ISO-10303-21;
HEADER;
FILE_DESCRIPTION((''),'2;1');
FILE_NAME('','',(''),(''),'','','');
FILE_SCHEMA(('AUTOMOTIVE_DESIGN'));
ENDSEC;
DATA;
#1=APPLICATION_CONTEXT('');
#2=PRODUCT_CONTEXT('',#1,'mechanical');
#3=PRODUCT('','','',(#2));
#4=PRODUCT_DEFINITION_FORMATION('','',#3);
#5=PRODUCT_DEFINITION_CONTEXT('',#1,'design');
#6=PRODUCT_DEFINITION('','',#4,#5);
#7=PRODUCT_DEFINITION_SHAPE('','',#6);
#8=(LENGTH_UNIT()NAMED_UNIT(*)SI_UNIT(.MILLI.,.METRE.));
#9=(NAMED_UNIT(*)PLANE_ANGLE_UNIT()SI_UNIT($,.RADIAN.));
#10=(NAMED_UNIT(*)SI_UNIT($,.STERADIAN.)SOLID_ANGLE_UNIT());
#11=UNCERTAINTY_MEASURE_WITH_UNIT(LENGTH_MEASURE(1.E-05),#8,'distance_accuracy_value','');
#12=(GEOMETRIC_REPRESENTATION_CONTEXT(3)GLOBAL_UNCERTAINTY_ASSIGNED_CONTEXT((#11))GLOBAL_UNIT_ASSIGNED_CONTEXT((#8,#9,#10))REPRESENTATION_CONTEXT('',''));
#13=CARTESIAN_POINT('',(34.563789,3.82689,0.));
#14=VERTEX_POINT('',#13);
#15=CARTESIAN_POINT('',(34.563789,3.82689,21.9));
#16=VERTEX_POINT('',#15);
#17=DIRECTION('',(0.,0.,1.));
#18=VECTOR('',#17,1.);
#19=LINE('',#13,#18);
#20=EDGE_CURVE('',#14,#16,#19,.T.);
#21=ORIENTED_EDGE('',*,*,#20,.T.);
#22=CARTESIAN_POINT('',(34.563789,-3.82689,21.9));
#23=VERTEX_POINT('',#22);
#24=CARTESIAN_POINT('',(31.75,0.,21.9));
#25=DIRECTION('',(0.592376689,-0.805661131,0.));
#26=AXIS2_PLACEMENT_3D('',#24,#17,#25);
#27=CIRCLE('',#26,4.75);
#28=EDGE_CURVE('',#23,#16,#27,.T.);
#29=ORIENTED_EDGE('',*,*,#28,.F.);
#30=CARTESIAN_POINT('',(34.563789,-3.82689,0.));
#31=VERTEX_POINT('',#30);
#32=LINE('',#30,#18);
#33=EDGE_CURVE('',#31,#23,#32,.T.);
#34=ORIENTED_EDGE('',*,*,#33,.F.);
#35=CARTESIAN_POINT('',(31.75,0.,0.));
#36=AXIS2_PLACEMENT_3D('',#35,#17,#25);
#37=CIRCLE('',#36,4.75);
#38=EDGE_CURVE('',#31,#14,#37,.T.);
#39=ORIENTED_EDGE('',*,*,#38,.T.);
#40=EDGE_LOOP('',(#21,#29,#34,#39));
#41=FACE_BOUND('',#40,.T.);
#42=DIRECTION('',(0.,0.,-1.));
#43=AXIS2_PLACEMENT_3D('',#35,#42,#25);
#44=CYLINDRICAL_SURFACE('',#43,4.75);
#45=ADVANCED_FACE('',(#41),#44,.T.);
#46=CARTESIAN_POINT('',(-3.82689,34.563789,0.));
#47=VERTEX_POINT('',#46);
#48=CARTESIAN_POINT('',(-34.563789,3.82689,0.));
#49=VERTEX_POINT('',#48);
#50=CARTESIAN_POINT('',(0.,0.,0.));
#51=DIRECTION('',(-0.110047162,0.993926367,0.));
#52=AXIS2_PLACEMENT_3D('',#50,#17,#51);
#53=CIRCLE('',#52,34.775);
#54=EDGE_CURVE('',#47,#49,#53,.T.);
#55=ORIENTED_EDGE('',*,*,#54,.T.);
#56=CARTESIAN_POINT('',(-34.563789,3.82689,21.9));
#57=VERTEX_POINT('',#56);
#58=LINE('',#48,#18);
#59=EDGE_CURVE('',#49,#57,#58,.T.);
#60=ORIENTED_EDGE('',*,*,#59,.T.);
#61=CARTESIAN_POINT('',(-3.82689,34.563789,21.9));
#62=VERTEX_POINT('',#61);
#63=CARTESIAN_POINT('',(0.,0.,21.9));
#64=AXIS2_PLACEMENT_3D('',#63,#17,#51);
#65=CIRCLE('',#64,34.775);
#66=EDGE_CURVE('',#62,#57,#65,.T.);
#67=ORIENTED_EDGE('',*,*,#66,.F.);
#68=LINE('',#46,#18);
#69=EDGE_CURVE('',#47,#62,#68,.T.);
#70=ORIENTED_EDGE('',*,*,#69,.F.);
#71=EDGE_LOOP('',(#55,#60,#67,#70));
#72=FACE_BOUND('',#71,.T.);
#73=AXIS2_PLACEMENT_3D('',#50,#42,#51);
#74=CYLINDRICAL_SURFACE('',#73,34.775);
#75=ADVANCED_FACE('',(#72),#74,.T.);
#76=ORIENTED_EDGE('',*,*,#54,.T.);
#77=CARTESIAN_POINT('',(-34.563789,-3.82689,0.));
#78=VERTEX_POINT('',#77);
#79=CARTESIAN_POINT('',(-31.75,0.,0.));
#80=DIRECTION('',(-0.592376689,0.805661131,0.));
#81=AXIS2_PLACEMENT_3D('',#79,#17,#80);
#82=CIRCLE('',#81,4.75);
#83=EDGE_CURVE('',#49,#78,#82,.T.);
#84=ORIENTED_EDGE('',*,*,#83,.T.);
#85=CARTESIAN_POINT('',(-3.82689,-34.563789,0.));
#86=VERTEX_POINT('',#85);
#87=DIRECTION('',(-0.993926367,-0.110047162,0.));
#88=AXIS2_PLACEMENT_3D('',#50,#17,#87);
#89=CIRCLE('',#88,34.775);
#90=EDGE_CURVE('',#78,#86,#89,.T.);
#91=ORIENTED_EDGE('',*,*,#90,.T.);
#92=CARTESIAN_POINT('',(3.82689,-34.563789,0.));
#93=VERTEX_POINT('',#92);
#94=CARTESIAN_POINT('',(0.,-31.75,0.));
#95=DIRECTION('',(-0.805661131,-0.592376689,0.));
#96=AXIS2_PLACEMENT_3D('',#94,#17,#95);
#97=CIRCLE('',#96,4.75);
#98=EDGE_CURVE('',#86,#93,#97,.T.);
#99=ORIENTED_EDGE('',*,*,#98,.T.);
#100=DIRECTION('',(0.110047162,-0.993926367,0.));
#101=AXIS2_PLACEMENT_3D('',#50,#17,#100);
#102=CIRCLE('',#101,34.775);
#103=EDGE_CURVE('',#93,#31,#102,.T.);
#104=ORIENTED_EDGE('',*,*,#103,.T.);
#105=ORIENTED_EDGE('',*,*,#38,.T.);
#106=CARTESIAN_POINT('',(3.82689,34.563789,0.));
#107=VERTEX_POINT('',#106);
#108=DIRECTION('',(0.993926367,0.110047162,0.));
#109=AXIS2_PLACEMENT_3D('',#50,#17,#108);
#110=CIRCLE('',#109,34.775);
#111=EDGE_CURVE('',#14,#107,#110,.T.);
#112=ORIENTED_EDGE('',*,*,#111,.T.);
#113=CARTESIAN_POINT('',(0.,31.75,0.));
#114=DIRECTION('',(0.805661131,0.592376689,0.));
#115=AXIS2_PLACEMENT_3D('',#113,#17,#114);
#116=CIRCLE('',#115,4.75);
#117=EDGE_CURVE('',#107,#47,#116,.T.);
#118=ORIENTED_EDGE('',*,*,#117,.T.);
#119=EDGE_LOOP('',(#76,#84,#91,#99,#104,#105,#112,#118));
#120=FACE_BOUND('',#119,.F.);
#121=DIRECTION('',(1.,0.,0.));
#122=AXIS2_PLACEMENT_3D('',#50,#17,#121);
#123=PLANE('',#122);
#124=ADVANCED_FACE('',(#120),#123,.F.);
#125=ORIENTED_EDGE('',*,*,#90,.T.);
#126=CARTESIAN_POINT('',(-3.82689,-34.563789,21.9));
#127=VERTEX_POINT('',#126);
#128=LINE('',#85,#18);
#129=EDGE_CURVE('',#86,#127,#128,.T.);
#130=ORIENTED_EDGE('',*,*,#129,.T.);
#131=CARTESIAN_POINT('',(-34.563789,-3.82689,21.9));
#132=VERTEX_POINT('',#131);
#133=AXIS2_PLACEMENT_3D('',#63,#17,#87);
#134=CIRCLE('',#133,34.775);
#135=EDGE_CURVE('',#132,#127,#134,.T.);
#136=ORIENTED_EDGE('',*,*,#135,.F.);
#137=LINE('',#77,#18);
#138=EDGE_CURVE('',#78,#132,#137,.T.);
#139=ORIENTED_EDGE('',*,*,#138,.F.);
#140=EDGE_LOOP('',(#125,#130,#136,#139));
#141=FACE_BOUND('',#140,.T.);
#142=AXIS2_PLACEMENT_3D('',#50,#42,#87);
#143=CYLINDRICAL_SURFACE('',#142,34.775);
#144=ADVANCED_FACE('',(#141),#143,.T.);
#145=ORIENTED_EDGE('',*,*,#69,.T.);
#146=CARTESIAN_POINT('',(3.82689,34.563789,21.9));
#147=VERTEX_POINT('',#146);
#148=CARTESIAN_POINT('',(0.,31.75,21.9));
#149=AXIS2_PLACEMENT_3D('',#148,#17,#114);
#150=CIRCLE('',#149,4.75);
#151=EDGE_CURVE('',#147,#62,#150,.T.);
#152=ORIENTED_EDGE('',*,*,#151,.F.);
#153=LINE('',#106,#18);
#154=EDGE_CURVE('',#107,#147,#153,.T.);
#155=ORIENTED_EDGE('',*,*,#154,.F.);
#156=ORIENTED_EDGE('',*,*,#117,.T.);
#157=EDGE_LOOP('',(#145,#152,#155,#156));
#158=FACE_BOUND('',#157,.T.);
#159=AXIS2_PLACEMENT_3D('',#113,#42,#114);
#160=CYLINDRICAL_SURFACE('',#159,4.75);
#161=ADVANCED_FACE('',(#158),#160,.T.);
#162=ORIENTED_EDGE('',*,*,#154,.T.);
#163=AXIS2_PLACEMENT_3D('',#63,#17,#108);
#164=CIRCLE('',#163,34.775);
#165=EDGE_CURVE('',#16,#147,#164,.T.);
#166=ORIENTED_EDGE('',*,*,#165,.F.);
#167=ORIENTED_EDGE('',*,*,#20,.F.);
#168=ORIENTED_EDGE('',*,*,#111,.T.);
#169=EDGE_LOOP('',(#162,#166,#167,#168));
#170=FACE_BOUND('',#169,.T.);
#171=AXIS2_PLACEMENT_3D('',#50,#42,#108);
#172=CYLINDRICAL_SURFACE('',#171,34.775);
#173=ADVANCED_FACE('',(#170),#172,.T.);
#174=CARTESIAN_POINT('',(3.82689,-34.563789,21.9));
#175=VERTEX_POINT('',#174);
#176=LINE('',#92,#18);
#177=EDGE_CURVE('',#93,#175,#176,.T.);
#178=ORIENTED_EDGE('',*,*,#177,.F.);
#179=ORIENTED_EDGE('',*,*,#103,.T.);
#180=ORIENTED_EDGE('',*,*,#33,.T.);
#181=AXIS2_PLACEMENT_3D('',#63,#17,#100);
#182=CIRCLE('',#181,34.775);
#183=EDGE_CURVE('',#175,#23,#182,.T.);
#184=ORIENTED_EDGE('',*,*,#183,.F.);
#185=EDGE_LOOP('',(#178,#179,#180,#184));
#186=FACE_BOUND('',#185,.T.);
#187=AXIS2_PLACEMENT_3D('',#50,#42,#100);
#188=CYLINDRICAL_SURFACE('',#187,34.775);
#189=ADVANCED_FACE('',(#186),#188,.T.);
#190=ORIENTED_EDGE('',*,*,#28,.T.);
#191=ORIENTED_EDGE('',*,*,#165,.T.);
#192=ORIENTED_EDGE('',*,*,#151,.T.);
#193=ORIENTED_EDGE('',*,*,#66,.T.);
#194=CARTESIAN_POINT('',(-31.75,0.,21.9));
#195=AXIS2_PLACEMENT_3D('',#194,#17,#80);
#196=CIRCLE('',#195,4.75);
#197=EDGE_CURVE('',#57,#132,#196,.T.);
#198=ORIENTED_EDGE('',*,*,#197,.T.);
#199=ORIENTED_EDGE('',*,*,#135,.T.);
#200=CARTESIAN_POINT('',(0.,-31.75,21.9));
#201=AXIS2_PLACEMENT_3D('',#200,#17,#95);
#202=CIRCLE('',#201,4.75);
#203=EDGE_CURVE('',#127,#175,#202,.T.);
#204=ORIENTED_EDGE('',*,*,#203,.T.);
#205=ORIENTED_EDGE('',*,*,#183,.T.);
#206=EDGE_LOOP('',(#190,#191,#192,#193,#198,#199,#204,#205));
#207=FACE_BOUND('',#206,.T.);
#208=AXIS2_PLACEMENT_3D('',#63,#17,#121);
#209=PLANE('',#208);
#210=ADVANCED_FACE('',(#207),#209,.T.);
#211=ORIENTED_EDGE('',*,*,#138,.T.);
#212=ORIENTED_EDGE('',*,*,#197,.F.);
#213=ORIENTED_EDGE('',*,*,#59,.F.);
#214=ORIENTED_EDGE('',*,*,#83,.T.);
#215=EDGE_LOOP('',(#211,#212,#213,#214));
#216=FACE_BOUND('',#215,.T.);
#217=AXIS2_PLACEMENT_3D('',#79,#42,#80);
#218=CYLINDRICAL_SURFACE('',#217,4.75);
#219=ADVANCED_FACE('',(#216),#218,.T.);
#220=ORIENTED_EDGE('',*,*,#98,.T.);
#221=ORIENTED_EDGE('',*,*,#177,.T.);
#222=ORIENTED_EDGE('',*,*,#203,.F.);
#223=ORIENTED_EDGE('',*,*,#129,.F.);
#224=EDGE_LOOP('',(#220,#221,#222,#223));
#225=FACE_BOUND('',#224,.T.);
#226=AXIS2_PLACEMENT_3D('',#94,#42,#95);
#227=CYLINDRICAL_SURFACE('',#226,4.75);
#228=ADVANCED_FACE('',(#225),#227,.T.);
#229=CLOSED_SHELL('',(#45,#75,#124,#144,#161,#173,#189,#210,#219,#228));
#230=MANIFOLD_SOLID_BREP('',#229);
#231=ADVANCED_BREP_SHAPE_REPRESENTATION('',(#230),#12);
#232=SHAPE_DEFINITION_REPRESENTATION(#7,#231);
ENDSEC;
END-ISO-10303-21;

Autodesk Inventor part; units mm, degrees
ref_plane "YZ Plane" through (0, 0, 0) normal (1, 0, 0) x (0, 1, 0)
ref_plane "XZ Plane" through (0, 0, 0) normal (0, 1, 0) x (-1, 0, 0)
ref_plane "XY Plane" through (0, 0, 0) normal (0, 0, 1) x (1, 0, 0)
sketch "Sketch1" plane through (0, 0, 0) normal (0, 0, 1) x (1, 0, 0)
  circle A0 centre (0, 0) radius 11.25
  circle A1 centre (0, 0) radius 35.025
  circle A2 centre (0, 0) radius 37.030393
  arc A3 (-32.79294, -17.200962) -> (-31.29294, -19.799038) centre (0, 0) ccw
  line L0 (-32.79294, -17.200962) -> (-31.05471, -16.197395)
  line L1 (-32.79294, -17.200962) -> (-31.05471, -16.197395)
  line L2 (-29.55471, -18.795471) -> (-31.29294, -19.799038)
  line L3 (-31.29294, -19.799038) -> (-29.55471, -18.795471)
  line L4 (-16.197395, -31.05471) -> (-17.200962, -32.79294)
  line L5 (-17.200962, -32.79294) -> (-16.197395, -31.05471)
  arc A4 (-19.799038, -31.29294) -> (-17.200962, -32.79294) centre (0, 0) ccw
  line L6 (-19.799038, -31.29294) -> (-18.795471, -29.55471)
  line L7 (-19.799038, -31.29294) -> (-18.795471, -29.55471)
  arc A5 (17.200962, -32.79294) -> (19.799038, -31.29294) centre (0, 0) ccw
  line L8 (17.200962, -32.79294) -> (16.197395, -31.05471)
  line L9 (17.200962, -32.79294) -> (16.197395, -31.05471)
  line L10 (18.795471, -29.55471) -> (19.799038, -31.29294)
  line L11 (19.799038, -31.29294) -> (18.795471, -29.55471)
  arc A6 (31.29294, -19.799038) -> (32.79294, -17.200962) centre (0, 0) ccw
  line L12 (31.29294, -19.799038) -> (29.55471, -18.795471)
  line L13 (31.05471, -16.197395) -> (32.79294, -17.200962)
  line L14 (32.79294, -17.200962) -> (31.05471, -16.197395)
  line L15 (32.79294, 17.200962) -> (31.05471, 16.197395)
  line L16 (32.79294, 17.200962) -> (31.05471, 16.197395)
  arc A7 (32.79294, 17.200962) -> (31.29294, 19.799038) centre (0, 0) ccw
  line L17 (29.55471, 18.795471) -> (31.29294, 19.799038)
  line L18 (31.29294, 19.799038) -> (29.55471, 18.795471)
  line L19 (16.197395, 31.05471) -> (17.200962, 32.79294)
  line L20 (17.200962, 32.79294) -> (16.197395, 31.05471)
  line L21 (19.799038, 31.29294) -> (18.795471, 29.55471)
  line L22 (19.799038, 31.29294) -> (18.795471, 29.55471)
  line L23 (-17.200962, 32.79294) -> (-16.197395, 31.05471)
  line L24 (-17.200962, 32.79294) -> (-16.197395, 31.05471)
  line L25 (-18.795471, 29.55471) -> (-19.799038, 31.29294)
  line L26 (-19.799038, 31.29294) -> (-18.795471, 29.55471)
  arc A8 (-31.29294, 19.799038) -> (-32.79294, 17.200962) centre (0, 0) ccw
  line L27 (-31.29294, 19.799038) -> (-29.55471, 18.795471)
  line L28 (-31.29294, 19.799038) -> (-29.55471, 18.795471)
  line L29 (-31.05471, 16.197395) -> (-32.79294, 17.200962)
  line L30 (-32.79294, 17.200962) -> (-31.05471, 16.197395)
  arc A9 (-34.800207, -3.961848) -> (-34.800207, 3.961848) centre (-31.75, 0) ccw
  circle A10 centre (-31.75, 0) radius 5
  arc A11 (-3.961848, 34.800207) -> (3.961848, 34.800207) centre (0, 31.75) ccw
  circle A12 centre (0, 31.75) radius 5
  circle A13 centre (31.75, 0) radius 5
  circle A14 centre (31.75, 0) radius 5
  arc A15 (-3.961848, -34.800207) -> (3.961848, -34.800207) centre (0, -31.75) ccw
  circle A16 centre (0, -31.75) radius 5
  circle A17 centre (0, 31.75) radius 4.75
  circle A18 centre (-31.75, 0) radius 4.75
  circle A19 centre (0, -31.75) radius 4.75
  circle A20 centre (31.75, 0) radius 4.75
  circle A21 centre (0, 0) radius 34.775
  circle A22 centre (0, 0) radius 36.75
  point P0 (0, 0)
  point P1 (0, 49.75)
  point P2 (34.563789, -3.82689)
  point P3 (34.563789, 3.82689)
  point P4 (3.82689, 34.563789)
  point P5 (-3.82689, 34.563789)
  point P6 (-34.563789, 3.82689)
  point P7 (-34.563789, -3.82689)
  point P8 (-3.82689, -34.563789)
  point P9 (3.82689, -34.563789)
  dimension "d6" = 70.05
  dimension "d8" = 74.06079
  dimension "d0" = 10
  dimension "d1" = 0.25
  dimension "d4" = 360
  dimension "d7" = 0.25
  dimension "d9" = 73.5
sketch "Sketch1 outline for Extrusion1" plane through (0, 0, 0) normal (0, 0, 1) x (1, 0, 0)
  arc A0 (3.82689, -34.563789) -> (34.563789, -3.82689) centre (0, 0) ccw
  arc A1 (-3.82689, -34.563789) -> (3.82689, -34.563789) centre (0, -31.75) ccw
  arc A2 (-34.563789, -3.82689) -> (-3.82689, -34.563789) centre (0, 0) ccw
  arc A3 (-34.563789, 3.82689) -> (-34.563789, -3.82689) centre (-31.75, 0) ccw
  arc A4 (-3.82689, 34.563789) -> (-34.563789, 3.82689) centre (0, 0) ccw
  arc A5 (3.82689, 34.563789) -> (-3.82689, 34.563789) centre (0, 31.75) ccw
  arc A6 (34.563789, 3.82689) -> (3.82689, 34.563789) centre (0, 0) ccw
  arc A7 (34.563789, -3.82689) -> (34.563789, 3.82689) centre (31.75, 0) ccw
extrude "Extrusion1" add sketch "Sketch1 outline for Extrusion1" along normal blind 21.9
properties part number "dummy_blende_130x130x130mm_corpus"
